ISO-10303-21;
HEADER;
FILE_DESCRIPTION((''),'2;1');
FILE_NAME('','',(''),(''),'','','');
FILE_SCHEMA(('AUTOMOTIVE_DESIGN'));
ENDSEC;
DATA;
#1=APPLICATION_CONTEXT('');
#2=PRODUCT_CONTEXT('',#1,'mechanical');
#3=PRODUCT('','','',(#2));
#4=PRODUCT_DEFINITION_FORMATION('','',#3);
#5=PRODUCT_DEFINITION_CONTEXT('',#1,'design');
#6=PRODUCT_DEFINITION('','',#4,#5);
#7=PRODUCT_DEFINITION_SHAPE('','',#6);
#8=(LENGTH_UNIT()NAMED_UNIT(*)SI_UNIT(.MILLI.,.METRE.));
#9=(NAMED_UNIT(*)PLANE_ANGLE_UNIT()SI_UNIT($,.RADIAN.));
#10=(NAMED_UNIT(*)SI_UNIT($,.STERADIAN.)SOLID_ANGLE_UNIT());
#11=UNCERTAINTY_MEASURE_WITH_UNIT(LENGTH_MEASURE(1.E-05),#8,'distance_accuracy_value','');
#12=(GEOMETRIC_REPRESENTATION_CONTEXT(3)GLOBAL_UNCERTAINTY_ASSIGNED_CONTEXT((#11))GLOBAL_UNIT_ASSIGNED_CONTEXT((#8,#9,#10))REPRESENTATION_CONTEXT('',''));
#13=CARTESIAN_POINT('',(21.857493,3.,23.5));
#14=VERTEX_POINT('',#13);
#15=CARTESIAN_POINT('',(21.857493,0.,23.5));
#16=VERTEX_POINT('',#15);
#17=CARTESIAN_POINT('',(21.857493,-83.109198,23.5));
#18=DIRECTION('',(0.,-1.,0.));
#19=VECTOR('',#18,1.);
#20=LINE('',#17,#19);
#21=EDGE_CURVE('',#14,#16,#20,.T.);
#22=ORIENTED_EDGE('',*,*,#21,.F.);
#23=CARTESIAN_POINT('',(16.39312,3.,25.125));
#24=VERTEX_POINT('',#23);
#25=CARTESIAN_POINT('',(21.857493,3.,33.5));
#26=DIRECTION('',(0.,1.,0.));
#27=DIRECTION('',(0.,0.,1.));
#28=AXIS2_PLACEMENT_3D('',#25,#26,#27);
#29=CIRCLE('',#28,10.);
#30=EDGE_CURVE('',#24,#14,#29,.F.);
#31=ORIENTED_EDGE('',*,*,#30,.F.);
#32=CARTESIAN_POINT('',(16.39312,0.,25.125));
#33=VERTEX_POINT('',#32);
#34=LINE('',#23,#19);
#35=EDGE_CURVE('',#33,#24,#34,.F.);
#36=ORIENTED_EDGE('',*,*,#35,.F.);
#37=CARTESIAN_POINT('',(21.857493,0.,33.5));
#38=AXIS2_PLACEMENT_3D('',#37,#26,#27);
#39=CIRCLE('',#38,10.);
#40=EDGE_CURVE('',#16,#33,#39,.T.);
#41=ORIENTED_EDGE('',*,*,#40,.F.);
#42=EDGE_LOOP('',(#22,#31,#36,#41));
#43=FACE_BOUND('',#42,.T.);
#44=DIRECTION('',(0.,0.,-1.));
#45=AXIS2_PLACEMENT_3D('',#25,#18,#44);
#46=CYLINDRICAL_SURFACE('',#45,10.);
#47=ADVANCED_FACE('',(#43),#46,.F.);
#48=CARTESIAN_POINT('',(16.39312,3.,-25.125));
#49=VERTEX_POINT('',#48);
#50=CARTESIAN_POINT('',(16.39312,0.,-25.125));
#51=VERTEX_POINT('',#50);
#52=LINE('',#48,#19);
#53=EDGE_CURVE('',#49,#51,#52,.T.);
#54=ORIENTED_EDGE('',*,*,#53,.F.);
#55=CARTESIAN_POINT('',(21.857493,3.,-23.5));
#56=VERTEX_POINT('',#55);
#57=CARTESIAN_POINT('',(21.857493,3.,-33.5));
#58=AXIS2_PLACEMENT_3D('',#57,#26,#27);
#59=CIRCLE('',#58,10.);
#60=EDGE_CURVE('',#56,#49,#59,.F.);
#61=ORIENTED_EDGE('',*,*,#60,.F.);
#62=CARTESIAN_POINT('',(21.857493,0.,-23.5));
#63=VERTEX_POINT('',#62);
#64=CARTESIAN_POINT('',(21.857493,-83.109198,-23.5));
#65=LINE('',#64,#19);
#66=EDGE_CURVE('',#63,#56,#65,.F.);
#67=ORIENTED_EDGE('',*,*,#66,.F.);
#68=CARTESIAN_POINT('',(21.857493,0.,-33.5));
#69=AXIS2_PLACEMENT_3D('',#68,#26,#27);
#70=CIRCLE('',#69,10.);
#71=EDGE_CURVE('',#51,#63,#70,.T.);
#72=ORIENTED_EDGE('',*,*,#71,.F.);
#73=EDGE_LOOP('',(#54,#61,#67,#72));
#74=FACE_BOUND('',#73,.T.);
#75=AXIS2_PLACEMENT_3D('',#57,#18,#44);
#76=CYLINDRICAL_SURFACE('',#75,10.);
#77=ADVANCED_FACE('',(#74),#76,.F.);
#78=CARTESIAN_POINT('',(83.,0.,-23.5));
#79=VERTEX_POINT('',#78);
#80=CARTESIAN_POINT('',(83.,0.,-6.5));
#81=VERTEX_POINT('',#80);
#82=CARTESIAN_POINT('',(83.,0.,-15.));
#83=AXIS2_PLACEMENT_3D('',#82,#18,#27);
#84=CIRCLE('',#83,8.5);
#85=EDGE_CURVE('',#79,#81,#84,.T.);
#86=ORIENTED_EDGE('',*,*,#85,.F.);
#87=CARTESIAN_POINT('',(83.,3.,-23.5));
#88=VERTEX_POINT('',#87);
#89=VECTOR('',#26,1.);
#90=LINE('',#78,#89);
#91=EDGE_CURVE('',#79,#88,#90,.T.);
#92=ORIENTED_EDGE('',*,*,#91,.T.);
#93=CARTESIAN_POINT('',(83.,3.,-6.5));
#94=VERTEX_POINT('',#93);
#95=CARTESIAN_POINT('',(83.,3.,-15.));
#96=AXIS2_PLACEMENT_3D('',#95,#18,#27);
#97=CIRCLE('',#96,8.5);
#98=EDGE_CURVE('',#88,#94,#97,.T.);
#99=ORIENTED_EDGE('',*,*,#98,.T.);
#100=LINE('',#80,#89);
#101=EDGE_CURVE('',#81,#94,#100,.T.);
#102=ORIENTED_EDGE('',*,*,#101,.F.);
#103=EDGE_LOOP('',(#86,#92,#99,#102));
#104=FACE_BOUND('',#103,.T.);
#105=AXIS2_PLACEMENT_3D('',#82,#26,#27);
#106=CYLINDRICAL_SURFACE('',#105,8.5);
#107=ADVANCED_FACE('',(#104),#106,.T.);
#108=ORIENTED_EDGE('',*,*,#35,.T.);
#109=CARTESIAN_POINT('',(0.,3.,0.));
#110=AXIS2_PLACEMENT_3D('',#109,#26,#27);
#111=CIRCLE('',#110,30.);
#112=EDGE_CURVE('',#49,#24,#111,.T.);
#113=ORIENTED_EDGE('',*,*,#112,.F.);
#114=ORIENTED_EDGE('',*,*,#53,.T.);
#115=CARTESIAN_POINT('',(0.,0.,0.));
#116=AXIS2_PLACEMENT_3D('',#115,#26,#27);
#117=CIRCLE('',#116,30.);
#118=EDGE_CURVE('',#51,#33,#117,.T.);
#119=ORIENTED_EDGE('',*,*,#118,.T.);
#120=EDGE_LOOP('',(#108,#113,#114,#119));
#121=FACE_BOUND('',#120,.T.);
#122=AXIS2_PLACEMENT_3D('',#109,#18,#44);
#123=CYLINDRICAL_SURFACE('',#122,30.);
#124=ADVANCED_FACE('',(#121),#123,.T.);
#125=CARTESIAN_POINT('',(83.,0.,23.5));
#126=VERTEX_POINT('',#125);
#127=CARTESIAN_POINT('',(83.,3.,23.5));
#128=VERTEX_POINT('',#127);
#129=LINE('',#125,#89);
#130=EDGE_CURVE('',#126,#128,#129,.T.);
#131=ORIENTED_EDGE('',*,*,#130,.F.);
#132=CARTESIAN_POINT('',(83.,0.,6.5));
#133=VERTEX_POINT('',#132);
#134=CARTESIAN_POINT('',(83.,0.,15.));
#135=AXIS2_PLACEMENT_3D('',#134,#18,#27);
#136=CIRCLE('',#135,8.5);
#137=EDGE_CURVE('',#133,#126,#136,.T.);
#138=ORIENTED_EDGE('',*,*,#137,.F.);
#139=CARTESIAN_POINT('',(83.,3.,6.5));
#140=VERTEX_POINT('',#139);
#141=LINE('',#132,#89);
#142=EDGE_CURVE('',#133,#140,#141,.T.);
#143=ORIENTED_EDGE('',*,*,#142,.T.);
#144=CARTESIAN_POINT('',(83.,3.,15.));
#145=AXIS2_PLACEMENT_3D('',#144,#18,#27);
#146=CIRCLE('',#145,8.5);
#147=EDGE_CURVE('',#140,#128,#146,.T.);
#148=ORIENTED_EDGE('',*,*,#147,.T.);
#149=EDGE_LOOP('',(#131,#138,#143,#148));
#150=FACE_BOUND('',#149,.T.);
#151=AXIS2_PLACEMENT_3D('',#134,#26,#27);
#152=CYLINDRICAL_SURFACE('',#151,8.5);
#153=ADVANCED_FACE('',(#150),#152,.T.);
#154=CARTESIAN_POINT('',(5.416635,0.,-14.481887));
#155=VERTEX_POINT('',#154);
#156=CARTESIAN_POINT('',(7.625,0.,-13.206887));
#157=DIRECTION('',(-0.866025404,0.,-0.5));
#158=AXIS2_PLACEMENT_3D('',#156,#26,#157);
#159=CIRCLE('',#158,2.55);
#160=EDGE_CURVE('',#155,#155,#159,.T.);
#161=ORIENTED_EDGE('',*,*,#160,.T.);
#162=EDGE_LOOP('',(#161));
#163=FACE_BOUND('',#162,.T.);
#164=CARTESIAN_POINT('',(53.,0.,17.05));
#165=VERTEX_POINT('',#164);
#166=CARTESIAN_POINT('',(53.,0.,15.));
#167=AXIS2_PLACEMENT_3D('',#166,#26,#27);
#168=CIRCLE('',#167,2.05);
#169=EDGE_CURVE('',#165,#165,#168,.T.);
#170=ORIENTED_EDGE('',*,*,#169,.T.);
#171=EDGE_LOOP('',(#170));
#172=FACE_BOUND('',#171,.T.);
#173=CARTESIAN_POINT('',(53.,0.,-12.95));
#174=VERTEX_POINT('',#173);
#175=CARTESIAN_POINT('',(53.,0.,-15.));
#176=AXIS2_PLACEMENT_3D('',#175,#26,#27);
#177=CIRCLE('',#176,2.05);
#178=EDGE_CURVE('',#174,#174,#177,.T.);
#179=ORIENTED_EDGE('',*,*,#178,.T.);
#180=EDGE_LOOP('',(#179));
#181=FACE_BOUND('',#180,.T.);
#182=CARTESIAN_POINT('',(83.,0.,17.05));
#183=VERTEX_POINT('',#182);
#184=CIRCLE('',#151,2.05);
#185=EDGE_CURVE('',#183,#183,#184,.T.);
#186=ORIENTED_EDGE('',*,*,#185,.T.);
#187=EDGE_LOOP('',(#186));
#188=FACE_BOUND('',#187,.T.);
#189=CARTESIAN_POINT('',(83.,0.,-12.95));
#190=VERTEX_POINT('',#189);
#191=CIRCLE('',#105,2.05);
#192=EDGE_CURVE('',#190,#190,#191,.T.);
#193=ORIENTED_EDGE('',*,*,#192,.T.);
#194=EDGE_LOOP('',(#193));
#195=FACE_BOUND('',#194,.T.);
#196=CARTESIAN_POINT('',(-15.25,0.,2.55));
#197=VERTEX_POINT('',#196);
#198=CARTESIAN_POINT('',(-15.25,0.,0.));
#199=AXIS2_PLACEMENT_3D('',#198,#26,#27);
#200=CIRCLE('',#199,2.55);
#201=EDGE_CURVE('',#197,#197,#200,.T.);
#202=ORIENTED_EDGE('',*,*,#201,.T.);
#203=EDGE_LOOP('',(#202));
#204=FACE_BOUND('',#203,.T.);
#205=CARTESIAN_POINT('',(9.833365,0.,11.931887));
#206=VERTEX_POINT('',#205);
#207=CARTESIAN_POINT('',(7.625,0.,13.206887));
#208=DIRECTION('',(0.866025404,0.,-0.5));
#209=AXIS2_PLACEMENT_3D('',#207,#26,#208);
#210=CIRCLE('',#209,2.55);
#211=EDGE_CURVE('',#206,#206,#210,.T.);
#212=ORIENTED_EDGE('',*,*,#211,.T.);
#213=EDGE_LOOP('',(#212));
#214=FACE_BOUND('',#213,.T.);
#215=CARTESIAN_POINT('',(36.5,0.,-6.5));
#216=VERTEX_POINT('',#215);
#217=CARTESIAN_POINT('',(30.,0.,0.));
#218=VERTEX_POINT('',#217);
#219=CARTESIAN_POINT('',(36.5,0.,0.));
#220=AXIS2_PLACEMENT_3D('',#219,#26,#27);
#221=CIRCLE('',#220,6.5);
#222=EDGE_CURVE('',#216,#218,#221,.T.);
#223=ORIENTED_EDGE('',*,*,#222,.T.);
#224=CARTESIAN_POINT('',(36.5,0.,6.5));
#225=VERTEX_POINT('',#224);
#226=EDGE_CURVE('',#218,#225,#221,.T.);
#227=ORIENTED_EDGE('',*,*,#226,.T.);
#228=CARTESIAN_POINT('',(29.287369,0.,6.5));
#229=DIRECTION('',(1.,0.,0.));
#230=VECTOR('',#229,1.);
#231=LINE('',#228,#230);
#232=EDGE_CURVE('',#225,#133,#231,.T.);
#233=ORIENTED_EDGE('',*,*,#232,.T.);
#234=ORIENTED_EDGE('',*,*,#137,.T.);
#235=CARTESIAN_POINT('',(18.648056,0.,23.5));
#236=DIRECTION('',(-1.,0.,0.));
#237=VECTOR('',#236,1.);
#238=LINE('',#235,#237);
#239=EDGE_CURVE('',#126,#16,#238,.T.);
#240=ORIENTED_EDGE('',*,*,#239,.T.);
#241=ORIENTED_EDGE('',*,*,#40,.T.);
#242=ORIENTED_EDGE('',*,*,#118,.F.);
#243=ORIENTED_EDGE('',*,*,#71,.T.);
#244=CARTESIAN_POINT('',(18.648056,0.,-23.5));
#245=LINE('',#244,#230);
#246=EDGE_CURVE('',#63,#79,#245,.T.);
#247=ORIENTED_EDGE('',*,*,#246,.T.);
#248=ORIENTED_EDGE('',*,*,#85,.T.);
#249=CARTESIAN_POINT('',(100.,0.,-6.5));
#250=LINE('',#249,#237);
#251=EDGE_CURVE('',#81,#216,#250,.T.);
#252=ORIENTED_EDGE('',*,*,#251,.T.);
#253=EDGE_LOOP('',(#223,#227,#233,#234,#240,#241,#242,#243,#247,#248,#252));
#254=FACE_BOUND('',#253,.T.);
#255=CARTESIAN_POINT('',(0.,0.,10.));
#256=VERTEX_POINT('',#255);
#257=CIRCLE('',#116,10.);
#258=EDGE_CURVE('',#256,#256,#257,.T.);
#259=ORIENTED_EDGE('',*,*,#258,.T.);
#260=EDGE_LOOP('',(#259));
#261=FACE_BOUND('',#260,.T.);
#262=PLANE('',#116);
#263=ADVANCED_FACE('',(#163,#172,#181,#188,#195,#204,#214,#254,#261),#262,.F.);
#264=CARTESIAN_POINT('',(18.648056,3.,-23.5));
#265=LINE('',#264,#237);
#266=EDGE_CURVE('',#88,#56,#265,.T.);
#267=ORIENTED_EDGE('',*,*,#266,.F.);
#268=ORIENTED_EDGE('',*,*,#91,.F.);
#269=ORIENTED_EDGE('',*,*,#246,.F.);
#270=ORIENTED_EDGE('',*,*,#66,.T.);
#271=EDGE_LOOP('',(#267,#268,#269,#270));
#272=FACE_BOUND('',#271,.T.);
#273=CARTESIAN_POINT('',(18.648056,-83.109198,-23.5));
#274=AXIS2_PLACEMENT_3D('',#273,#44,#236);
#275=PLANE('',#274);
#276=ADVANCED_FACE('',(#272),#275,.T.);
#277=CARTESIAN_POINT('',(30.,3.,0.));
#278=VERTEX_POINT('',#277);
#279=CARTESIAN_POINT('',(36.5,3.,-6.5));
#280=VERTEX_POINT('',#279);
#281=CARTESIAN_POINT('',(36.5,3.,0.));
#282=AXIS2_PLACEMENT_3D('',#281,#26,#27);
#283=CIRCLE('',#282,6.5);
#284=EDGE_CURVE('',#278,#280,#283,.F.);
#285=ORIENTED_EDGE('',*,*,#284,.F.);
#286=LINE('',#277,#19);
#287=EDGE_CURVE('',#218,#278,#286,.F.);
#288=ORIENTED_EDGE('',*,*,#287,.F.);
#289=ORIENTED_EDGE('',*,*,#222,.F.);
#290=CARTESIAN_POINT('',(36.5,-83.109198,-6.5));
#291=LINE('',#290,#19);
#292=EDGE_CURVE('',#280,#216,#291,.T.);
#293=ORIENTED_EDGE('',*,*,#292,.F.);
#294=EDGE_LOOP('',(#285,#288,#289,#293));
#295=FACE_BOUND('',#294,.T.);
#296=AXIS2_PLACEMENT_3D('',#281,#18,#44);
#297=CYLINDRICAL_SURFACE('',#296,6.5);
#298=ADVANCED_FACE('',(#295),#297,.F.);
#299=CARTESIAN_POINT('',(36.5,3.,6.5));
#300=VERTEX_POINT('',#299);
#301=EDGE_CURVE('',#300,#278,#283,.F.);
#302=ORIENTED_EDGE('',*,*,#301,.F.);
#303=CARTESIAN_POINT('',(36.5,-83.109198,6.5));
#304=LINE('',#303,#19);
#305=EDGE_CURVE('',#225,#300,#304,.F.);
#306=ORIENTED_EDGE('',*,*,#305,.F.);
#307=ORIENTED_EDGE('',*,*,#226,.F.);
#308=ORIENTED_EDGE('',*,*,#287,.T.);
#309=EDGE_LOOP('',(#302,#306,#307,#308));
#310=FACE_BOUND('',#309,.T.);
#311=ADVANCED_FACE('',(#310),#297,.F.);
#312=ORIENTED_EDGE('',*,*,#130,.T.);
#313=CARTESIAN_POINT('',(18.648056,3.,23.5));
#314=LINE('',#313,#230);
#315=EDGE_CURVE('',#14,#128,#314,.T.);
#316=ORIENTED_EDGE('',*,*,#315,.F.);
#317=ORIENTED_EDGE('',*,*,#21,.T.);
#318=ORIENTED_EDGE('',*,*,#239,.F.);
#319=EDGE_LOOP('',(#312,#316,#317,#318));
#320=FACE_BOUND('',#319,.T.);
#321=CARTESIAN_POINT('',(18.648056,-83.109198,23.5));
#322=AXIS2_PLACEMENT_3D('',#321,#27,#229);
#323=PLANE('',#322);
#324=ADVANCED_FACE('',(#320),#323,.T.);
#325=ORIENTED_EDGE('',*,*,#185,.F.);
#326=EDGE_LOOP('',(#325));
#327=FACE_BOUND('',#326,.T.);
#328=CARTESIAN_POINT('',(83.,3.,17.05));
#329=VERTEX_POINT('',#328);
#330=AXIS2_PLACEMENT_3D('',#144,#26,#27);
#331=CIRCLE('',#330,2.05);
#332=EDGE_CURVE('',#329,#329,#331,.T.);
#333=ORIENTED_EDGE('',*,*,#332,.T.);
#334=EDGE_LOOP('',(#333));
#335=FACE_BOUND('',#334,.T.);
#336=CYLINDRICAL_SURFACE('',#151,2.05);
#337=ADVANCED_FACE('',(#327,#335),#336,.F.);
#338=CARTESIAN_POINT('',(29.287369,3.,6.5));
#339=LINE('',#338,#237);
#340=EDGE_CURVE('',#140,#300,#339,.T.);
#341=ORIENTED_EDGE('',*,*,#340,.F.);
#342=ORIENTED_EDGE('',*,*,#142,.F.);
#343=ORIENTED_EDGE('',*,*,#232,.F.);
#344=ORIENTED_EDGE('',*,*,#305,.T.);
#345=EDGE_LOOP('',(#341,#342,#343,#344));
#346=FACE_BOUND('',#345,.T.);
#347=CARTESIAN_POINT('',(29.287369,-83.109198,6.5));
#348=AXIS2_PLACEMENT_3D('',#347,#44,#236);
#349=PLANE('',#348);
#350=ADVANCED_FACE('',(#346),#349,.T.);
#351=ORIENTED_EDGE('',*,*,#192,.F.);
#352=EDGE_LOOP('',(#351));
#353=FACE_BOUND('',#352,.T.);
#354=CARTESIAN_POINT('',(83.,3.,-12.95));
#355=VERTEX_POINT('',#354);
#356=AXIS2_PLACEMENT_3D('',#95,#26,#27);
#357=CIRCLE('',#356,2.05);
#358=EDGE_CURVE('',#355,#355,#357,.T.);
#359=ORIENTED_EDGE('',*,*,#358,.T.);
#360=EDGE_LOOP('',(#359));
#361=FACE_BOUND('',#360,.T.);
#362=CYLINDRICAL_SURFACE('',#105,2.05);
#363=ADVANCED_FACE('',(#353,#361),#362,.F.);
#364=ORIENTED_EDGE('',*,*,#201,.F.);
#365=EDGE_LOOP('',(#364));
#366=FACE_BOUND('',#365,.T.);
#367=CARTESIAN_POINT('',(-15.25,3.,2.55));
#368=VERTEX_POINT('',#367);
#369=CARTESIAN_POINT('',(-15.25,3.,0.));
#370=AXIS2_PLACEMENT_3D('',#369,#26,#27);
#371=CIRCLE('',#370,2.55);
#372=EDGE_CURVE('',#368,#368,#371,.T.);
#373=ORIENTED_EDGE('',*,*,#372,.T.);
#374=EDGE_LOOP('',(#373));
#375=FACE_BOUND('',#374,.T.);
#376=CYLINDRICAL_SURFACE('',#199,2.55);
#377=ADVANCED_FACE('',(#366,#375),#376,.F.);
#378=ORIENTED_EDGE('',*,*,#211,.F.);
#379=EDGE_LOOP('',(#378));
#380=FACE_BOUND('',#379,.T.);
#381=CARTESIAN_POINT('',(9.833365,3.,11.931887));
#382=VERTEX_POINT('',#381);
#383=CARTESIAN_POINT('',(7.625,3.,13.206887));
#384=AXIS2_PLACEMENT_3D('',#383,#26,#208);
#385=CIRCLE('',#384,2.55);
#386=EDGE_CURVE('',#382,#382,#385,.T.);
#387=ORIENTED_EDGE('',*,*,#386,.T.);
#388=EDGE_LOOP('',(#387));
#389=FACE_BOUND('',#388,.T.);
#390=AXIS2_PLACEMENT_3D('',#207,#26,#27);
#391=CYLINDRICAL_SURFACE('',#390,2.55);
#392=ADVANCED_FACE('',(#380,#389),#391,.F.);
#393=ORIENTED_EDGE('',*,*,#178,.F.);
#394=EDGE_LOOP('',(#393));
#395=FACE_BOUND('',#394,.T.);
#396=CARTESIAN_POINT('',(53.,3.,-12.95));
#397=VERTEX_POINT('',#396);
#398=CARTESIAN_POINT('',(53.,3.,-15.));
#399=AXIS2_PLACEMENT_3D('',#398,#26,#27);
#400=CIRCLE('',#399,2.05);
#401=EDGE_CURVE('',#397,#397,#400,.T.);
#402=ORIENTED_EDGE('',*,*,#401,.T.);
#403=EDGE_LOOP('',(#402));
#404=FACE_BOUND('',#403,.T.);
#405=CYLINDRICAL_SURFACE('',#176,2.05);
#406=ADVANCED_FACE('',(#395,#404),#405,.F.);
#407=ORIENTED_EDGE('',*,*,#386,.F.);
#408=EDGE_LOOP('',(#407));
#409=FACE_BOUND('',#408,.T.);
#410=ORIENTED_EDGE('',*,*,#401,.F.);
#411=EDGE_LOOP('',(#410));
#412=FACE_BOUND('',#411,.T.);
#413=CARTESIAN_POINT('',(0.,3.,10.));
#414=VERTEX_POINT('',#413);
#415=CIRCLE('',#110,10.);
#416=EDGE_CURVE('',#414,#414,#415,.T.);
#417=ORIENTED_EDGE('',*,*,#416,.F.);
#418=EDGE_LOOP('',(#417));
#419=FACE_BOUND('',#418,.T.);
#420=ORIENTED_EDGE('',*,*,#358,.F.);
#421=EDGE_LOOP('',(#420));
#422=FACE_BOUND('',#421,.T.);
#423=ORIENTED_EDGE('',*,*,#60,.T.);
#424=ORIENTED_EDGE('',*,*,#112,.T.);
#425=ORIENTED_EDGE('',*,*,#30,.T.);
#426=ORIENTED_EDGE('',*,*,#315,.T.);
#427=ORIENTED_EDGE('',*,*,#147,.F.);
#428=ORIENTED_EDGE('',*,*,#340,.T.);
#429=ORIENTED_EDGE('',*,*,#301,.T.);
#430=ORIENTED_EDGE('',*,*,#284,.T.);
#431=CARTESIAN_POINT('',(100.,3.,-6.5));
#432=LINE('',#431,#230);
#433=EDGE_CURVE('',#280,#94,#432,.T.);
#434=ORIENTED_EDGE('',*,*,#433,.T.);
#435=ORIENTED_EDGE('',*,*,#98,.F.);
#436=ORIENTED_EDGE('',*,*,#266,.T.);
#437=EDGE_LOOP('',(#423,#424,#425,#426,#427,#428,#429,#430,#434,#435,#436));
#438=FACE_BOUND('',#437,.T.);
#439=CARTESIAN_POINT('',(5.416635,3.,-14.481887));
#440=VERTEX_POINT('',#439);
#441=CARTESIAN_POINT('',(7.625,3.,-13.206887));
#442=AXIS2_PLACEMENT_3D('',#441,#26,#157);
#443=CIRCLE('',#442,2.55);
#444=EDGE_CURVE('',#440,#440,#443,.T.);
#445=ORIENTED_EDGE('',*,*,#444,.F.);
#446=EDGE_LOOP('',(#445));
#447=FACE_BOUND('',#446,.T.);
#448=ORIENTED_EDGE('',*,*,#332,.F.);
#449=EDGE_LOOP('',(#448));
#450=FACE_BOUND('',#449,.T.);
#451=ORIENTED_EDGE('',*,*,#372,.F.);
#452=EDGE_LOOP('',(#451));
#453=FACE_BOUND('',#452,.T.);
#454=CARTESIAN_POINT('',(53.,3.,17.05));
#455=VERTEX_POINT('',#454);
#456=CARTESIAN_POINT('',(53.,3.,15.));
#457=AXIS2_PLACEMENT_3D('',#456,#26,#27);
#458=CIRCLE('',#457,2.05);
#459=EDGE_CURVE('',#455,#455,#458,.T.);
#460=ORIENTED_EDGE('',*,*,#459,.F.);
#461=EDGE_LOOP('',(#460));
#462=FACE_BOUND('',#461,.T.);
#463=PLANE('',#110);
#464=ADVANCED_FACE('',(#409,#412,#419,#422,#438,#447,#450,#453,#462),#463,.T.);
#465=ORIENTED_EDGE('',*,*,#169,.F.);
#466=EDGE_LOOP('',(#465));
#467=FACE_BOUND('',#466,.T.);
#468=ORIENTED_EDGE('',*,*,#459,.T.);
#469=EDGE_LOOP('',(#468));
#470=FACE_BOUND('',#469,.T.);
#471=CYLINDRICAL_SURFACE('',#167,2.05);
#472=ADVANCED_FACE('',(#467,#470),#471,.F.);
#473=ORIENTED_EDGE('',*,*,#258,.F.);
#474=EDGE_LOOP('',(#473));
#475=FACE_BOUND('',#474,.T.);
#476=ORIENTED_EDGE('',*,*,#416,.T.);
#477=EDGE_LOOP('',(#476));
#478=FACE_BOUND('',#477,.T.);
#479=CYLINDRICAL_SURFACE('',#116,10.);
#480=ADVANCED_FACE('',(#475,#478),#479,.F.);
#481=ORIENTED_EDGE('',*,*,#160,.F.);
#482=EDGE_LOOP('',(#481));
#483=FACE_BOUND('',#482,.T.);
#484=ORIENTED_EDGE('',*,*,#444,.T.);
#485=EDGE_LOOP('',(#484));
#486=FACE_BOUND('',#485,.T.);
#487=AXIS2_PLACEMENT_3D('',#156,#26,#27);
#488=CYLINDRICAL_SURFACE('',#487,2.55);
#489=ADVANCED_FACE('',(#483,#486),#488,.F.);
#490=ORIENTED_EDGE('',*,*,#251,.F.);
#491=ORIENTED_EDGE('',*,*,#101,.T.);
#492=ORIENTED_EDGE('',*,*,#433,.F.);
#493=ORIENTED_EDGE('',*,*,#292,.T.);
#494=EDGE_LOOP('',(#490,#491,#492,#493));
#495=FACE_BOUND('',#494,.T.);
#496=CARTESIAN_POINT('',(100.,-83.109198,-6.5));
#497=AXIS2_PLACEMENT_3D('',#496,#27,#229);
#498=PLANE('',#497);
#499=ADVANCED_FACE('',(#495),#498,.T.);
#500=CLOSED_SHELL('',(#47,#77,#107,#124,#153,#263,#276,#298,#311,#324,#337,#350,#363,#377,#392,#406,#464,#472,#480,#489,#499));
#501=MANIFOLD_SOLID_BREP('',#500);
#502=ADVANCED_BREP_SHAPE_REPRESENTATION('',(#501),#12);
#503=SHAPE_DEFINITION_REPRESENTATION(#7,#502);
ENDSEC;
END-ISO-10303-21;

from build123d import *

# Parameters (mm, degrees)
SKETCH1_R           = 30
BOSS_EXTRUDE1_DEPTH = 3
BOSS_EXTRUDE2_START = -3
BOSS_EXTRUDE2_DEPTH = 3
SKETCH3_R           = 2.05
CUT_EXTRUDE1_DEPTH  = 105.446158378
CUT_EXTRUDE3_DEPTH  = 105.446158378
FILLET1_R           = 10
FILLET2_R           = 6.5
SKETCH7_R           = 2.55
CUT_EXTRUDE4_DEPTH  = 97.33924434
CIRPATTERN1_COUNT   = 3
SKETCH8_R           = 10
CUT_EXTRUDE5_DEPTH  = 97.33924434


with BuildPart() as part:
    # Sketch1 → Boss-Extrude1 (new body)
    with BuildSketch(Plane(origin=(0, 0, 0), x_dir=(1, 0, 0), z_dir=(0, 1, 0))):
        with Locations(Location((0, 0, 0), (0, 0, 270))):
            Circle(SKETCH1_R)
    extrude(amount=BOSS_EXTRUDE1_DEPTH)

    # Sketch2 → Boss-Extrude2 (add)
    with BuildSketch(Plane(origin=(0, 3, 0), x_dir=(1, 0, 0), z_dir=(0, 1, 0)).offset(BOSS_EXTRUDE2_START)):
        with BuildLine():
            Line((100, 6.5), (29.287369291, 6.5))
            ThreePointArc((29.287369291, 6.5), (25.430321552, 15.915361943), (18.648056199, 23.5))
            Line((18.648056199, 23.5), (100, 23.5))
            Line((100, 23.5), (100, 6.5))
        make_face()
        with BuildLine():
            Line((29.287369291, -6.5), (100, -6.5))
            Line((100, -6.5), (100, -23.5))
            Line((100, -23.5), (18.648056199, -23.5))
            ThreePointArc((18.648056199, -23.5), (25.430321552, -15.915361943), (29.287369291, -6.5))
        make_face()
    extrude(amount=BOSS_EXTRUDE2_DEPTH)

    # Sketch3 → Cut-Extrude1 (cut, through all)
    with BuildSketch(Plane(origin=(0, 3, 0), x_dir=(1, 0, 0), z_dir=(0, 1, 0))):
        with Locations(Location((53, 15, 0), (0, 0, 270))):
            Circle(SKETCH3_R)
        with Locations(Location((83, 15, 0), (0, 0, 270))):
            Circle(SKETCH3_R)
        with Locations(Location((53, -15, 0), (0, 0, 270))):
            Circle(SKETCH3_R)
        with Locations(Location((83, -15, 0), (0, 0, 270))):
            Circle(SKETCH3_R)
    extrude(amount=-CUT_EXTRUDE1_DEPTH, mode=Mode.SUBTRACT)

    # Sketch6 → Cut-Extrude3 (cut, through all)
    with BuildSketch(Plane(origin=(0, 3, 0), x_dir=(1, 0, 0), z_dir=(0, 1, 0))):
        with BuildLine():
            Line((100, 23.5), (83, 23.5))
            ThreePointArc((83, 23.5), (91.5, 15), (83, 6.5))
            Line((83, 6.5), (100, 6.5))
            Line((100, 6.5), (100, 23.5))
        make_face()
        with BuildLine():
            Line((100, -6.5), (83, -6.5))
            ThreePointArc((83, -6.5), (91.5, -15), (83, -23.5))
            Line((83, -23.5), (100, -23.5))
            Line((100, -23.5), (100, -6.5))
        make_face()
    extrude(amount=-CUT_EXTRUDE3_DEPTH, mode=Mode.SUBTRACT)

    # Fillet1
    fillet1_edges = [part.edges().sort_by_distance(p)[0] for p in [
        (18.648056199, 1.5, 23.5),
        (18.648056199, 1.5, -23.5),
    ]]
    fillet(fillet1_edges, radius=FILLET1_R)

    # Fillet2
    fillet2_edges = [part.edges().sort_by_distance(p)[0] for p in [
        (29.287369291, 1.5, 6.5),
        (29.287369291, 1.5, -6.5),
    ]]
    fillet(fillet2_edges, radius=FILLET2_R - 0.0001)  # a hair under: the kernel refuses the full size

    # Sketch7 → Cut-Extrude4 (cut, through all)
    with BuildSketch(Plane(origin=(0, 3, 0), x_dir=(1, 0, 0), z_dir=(0, 1, 0))):
        with Locations(Location((-15.25, 0, 0), (0, 0, 270))):
            Circle(SKETCH7_R)
    cut_extrude4 = extrude(amount=-CUT_EXTRUDE4_DEPTH, mode=Mode.SUBTRACT)

    # CirPattern1: Cut-Extrude4 ×3 about axis
    cirpattern1_axis = Axis((0, 0, 0), (0, 1, 0))
    for i in range(1, CIRPATTERN1_COUNT):
        add(cut_extrude4.rotate(cirpattern1_axis, i * 360 / CIRPATTERN1_COUNT), mode=Mode.SUBTRACT)

    # Sketch8 → Cut-Extrude5 (cut, through all)
    with BuildSketch(Plane(origin=(0, 3, 0), x_dir=(1, 0, 0), z_dir=(0, 1, 0))):
        with Locations(Location((0, 0, 0), (0, 0, 270))):
            Circle(SKETCH8_R)
    extrude(amount=-CUT_EXTRUDE5_DEPTH, mode=Mode.SUBTRACT)


solid = part.part
